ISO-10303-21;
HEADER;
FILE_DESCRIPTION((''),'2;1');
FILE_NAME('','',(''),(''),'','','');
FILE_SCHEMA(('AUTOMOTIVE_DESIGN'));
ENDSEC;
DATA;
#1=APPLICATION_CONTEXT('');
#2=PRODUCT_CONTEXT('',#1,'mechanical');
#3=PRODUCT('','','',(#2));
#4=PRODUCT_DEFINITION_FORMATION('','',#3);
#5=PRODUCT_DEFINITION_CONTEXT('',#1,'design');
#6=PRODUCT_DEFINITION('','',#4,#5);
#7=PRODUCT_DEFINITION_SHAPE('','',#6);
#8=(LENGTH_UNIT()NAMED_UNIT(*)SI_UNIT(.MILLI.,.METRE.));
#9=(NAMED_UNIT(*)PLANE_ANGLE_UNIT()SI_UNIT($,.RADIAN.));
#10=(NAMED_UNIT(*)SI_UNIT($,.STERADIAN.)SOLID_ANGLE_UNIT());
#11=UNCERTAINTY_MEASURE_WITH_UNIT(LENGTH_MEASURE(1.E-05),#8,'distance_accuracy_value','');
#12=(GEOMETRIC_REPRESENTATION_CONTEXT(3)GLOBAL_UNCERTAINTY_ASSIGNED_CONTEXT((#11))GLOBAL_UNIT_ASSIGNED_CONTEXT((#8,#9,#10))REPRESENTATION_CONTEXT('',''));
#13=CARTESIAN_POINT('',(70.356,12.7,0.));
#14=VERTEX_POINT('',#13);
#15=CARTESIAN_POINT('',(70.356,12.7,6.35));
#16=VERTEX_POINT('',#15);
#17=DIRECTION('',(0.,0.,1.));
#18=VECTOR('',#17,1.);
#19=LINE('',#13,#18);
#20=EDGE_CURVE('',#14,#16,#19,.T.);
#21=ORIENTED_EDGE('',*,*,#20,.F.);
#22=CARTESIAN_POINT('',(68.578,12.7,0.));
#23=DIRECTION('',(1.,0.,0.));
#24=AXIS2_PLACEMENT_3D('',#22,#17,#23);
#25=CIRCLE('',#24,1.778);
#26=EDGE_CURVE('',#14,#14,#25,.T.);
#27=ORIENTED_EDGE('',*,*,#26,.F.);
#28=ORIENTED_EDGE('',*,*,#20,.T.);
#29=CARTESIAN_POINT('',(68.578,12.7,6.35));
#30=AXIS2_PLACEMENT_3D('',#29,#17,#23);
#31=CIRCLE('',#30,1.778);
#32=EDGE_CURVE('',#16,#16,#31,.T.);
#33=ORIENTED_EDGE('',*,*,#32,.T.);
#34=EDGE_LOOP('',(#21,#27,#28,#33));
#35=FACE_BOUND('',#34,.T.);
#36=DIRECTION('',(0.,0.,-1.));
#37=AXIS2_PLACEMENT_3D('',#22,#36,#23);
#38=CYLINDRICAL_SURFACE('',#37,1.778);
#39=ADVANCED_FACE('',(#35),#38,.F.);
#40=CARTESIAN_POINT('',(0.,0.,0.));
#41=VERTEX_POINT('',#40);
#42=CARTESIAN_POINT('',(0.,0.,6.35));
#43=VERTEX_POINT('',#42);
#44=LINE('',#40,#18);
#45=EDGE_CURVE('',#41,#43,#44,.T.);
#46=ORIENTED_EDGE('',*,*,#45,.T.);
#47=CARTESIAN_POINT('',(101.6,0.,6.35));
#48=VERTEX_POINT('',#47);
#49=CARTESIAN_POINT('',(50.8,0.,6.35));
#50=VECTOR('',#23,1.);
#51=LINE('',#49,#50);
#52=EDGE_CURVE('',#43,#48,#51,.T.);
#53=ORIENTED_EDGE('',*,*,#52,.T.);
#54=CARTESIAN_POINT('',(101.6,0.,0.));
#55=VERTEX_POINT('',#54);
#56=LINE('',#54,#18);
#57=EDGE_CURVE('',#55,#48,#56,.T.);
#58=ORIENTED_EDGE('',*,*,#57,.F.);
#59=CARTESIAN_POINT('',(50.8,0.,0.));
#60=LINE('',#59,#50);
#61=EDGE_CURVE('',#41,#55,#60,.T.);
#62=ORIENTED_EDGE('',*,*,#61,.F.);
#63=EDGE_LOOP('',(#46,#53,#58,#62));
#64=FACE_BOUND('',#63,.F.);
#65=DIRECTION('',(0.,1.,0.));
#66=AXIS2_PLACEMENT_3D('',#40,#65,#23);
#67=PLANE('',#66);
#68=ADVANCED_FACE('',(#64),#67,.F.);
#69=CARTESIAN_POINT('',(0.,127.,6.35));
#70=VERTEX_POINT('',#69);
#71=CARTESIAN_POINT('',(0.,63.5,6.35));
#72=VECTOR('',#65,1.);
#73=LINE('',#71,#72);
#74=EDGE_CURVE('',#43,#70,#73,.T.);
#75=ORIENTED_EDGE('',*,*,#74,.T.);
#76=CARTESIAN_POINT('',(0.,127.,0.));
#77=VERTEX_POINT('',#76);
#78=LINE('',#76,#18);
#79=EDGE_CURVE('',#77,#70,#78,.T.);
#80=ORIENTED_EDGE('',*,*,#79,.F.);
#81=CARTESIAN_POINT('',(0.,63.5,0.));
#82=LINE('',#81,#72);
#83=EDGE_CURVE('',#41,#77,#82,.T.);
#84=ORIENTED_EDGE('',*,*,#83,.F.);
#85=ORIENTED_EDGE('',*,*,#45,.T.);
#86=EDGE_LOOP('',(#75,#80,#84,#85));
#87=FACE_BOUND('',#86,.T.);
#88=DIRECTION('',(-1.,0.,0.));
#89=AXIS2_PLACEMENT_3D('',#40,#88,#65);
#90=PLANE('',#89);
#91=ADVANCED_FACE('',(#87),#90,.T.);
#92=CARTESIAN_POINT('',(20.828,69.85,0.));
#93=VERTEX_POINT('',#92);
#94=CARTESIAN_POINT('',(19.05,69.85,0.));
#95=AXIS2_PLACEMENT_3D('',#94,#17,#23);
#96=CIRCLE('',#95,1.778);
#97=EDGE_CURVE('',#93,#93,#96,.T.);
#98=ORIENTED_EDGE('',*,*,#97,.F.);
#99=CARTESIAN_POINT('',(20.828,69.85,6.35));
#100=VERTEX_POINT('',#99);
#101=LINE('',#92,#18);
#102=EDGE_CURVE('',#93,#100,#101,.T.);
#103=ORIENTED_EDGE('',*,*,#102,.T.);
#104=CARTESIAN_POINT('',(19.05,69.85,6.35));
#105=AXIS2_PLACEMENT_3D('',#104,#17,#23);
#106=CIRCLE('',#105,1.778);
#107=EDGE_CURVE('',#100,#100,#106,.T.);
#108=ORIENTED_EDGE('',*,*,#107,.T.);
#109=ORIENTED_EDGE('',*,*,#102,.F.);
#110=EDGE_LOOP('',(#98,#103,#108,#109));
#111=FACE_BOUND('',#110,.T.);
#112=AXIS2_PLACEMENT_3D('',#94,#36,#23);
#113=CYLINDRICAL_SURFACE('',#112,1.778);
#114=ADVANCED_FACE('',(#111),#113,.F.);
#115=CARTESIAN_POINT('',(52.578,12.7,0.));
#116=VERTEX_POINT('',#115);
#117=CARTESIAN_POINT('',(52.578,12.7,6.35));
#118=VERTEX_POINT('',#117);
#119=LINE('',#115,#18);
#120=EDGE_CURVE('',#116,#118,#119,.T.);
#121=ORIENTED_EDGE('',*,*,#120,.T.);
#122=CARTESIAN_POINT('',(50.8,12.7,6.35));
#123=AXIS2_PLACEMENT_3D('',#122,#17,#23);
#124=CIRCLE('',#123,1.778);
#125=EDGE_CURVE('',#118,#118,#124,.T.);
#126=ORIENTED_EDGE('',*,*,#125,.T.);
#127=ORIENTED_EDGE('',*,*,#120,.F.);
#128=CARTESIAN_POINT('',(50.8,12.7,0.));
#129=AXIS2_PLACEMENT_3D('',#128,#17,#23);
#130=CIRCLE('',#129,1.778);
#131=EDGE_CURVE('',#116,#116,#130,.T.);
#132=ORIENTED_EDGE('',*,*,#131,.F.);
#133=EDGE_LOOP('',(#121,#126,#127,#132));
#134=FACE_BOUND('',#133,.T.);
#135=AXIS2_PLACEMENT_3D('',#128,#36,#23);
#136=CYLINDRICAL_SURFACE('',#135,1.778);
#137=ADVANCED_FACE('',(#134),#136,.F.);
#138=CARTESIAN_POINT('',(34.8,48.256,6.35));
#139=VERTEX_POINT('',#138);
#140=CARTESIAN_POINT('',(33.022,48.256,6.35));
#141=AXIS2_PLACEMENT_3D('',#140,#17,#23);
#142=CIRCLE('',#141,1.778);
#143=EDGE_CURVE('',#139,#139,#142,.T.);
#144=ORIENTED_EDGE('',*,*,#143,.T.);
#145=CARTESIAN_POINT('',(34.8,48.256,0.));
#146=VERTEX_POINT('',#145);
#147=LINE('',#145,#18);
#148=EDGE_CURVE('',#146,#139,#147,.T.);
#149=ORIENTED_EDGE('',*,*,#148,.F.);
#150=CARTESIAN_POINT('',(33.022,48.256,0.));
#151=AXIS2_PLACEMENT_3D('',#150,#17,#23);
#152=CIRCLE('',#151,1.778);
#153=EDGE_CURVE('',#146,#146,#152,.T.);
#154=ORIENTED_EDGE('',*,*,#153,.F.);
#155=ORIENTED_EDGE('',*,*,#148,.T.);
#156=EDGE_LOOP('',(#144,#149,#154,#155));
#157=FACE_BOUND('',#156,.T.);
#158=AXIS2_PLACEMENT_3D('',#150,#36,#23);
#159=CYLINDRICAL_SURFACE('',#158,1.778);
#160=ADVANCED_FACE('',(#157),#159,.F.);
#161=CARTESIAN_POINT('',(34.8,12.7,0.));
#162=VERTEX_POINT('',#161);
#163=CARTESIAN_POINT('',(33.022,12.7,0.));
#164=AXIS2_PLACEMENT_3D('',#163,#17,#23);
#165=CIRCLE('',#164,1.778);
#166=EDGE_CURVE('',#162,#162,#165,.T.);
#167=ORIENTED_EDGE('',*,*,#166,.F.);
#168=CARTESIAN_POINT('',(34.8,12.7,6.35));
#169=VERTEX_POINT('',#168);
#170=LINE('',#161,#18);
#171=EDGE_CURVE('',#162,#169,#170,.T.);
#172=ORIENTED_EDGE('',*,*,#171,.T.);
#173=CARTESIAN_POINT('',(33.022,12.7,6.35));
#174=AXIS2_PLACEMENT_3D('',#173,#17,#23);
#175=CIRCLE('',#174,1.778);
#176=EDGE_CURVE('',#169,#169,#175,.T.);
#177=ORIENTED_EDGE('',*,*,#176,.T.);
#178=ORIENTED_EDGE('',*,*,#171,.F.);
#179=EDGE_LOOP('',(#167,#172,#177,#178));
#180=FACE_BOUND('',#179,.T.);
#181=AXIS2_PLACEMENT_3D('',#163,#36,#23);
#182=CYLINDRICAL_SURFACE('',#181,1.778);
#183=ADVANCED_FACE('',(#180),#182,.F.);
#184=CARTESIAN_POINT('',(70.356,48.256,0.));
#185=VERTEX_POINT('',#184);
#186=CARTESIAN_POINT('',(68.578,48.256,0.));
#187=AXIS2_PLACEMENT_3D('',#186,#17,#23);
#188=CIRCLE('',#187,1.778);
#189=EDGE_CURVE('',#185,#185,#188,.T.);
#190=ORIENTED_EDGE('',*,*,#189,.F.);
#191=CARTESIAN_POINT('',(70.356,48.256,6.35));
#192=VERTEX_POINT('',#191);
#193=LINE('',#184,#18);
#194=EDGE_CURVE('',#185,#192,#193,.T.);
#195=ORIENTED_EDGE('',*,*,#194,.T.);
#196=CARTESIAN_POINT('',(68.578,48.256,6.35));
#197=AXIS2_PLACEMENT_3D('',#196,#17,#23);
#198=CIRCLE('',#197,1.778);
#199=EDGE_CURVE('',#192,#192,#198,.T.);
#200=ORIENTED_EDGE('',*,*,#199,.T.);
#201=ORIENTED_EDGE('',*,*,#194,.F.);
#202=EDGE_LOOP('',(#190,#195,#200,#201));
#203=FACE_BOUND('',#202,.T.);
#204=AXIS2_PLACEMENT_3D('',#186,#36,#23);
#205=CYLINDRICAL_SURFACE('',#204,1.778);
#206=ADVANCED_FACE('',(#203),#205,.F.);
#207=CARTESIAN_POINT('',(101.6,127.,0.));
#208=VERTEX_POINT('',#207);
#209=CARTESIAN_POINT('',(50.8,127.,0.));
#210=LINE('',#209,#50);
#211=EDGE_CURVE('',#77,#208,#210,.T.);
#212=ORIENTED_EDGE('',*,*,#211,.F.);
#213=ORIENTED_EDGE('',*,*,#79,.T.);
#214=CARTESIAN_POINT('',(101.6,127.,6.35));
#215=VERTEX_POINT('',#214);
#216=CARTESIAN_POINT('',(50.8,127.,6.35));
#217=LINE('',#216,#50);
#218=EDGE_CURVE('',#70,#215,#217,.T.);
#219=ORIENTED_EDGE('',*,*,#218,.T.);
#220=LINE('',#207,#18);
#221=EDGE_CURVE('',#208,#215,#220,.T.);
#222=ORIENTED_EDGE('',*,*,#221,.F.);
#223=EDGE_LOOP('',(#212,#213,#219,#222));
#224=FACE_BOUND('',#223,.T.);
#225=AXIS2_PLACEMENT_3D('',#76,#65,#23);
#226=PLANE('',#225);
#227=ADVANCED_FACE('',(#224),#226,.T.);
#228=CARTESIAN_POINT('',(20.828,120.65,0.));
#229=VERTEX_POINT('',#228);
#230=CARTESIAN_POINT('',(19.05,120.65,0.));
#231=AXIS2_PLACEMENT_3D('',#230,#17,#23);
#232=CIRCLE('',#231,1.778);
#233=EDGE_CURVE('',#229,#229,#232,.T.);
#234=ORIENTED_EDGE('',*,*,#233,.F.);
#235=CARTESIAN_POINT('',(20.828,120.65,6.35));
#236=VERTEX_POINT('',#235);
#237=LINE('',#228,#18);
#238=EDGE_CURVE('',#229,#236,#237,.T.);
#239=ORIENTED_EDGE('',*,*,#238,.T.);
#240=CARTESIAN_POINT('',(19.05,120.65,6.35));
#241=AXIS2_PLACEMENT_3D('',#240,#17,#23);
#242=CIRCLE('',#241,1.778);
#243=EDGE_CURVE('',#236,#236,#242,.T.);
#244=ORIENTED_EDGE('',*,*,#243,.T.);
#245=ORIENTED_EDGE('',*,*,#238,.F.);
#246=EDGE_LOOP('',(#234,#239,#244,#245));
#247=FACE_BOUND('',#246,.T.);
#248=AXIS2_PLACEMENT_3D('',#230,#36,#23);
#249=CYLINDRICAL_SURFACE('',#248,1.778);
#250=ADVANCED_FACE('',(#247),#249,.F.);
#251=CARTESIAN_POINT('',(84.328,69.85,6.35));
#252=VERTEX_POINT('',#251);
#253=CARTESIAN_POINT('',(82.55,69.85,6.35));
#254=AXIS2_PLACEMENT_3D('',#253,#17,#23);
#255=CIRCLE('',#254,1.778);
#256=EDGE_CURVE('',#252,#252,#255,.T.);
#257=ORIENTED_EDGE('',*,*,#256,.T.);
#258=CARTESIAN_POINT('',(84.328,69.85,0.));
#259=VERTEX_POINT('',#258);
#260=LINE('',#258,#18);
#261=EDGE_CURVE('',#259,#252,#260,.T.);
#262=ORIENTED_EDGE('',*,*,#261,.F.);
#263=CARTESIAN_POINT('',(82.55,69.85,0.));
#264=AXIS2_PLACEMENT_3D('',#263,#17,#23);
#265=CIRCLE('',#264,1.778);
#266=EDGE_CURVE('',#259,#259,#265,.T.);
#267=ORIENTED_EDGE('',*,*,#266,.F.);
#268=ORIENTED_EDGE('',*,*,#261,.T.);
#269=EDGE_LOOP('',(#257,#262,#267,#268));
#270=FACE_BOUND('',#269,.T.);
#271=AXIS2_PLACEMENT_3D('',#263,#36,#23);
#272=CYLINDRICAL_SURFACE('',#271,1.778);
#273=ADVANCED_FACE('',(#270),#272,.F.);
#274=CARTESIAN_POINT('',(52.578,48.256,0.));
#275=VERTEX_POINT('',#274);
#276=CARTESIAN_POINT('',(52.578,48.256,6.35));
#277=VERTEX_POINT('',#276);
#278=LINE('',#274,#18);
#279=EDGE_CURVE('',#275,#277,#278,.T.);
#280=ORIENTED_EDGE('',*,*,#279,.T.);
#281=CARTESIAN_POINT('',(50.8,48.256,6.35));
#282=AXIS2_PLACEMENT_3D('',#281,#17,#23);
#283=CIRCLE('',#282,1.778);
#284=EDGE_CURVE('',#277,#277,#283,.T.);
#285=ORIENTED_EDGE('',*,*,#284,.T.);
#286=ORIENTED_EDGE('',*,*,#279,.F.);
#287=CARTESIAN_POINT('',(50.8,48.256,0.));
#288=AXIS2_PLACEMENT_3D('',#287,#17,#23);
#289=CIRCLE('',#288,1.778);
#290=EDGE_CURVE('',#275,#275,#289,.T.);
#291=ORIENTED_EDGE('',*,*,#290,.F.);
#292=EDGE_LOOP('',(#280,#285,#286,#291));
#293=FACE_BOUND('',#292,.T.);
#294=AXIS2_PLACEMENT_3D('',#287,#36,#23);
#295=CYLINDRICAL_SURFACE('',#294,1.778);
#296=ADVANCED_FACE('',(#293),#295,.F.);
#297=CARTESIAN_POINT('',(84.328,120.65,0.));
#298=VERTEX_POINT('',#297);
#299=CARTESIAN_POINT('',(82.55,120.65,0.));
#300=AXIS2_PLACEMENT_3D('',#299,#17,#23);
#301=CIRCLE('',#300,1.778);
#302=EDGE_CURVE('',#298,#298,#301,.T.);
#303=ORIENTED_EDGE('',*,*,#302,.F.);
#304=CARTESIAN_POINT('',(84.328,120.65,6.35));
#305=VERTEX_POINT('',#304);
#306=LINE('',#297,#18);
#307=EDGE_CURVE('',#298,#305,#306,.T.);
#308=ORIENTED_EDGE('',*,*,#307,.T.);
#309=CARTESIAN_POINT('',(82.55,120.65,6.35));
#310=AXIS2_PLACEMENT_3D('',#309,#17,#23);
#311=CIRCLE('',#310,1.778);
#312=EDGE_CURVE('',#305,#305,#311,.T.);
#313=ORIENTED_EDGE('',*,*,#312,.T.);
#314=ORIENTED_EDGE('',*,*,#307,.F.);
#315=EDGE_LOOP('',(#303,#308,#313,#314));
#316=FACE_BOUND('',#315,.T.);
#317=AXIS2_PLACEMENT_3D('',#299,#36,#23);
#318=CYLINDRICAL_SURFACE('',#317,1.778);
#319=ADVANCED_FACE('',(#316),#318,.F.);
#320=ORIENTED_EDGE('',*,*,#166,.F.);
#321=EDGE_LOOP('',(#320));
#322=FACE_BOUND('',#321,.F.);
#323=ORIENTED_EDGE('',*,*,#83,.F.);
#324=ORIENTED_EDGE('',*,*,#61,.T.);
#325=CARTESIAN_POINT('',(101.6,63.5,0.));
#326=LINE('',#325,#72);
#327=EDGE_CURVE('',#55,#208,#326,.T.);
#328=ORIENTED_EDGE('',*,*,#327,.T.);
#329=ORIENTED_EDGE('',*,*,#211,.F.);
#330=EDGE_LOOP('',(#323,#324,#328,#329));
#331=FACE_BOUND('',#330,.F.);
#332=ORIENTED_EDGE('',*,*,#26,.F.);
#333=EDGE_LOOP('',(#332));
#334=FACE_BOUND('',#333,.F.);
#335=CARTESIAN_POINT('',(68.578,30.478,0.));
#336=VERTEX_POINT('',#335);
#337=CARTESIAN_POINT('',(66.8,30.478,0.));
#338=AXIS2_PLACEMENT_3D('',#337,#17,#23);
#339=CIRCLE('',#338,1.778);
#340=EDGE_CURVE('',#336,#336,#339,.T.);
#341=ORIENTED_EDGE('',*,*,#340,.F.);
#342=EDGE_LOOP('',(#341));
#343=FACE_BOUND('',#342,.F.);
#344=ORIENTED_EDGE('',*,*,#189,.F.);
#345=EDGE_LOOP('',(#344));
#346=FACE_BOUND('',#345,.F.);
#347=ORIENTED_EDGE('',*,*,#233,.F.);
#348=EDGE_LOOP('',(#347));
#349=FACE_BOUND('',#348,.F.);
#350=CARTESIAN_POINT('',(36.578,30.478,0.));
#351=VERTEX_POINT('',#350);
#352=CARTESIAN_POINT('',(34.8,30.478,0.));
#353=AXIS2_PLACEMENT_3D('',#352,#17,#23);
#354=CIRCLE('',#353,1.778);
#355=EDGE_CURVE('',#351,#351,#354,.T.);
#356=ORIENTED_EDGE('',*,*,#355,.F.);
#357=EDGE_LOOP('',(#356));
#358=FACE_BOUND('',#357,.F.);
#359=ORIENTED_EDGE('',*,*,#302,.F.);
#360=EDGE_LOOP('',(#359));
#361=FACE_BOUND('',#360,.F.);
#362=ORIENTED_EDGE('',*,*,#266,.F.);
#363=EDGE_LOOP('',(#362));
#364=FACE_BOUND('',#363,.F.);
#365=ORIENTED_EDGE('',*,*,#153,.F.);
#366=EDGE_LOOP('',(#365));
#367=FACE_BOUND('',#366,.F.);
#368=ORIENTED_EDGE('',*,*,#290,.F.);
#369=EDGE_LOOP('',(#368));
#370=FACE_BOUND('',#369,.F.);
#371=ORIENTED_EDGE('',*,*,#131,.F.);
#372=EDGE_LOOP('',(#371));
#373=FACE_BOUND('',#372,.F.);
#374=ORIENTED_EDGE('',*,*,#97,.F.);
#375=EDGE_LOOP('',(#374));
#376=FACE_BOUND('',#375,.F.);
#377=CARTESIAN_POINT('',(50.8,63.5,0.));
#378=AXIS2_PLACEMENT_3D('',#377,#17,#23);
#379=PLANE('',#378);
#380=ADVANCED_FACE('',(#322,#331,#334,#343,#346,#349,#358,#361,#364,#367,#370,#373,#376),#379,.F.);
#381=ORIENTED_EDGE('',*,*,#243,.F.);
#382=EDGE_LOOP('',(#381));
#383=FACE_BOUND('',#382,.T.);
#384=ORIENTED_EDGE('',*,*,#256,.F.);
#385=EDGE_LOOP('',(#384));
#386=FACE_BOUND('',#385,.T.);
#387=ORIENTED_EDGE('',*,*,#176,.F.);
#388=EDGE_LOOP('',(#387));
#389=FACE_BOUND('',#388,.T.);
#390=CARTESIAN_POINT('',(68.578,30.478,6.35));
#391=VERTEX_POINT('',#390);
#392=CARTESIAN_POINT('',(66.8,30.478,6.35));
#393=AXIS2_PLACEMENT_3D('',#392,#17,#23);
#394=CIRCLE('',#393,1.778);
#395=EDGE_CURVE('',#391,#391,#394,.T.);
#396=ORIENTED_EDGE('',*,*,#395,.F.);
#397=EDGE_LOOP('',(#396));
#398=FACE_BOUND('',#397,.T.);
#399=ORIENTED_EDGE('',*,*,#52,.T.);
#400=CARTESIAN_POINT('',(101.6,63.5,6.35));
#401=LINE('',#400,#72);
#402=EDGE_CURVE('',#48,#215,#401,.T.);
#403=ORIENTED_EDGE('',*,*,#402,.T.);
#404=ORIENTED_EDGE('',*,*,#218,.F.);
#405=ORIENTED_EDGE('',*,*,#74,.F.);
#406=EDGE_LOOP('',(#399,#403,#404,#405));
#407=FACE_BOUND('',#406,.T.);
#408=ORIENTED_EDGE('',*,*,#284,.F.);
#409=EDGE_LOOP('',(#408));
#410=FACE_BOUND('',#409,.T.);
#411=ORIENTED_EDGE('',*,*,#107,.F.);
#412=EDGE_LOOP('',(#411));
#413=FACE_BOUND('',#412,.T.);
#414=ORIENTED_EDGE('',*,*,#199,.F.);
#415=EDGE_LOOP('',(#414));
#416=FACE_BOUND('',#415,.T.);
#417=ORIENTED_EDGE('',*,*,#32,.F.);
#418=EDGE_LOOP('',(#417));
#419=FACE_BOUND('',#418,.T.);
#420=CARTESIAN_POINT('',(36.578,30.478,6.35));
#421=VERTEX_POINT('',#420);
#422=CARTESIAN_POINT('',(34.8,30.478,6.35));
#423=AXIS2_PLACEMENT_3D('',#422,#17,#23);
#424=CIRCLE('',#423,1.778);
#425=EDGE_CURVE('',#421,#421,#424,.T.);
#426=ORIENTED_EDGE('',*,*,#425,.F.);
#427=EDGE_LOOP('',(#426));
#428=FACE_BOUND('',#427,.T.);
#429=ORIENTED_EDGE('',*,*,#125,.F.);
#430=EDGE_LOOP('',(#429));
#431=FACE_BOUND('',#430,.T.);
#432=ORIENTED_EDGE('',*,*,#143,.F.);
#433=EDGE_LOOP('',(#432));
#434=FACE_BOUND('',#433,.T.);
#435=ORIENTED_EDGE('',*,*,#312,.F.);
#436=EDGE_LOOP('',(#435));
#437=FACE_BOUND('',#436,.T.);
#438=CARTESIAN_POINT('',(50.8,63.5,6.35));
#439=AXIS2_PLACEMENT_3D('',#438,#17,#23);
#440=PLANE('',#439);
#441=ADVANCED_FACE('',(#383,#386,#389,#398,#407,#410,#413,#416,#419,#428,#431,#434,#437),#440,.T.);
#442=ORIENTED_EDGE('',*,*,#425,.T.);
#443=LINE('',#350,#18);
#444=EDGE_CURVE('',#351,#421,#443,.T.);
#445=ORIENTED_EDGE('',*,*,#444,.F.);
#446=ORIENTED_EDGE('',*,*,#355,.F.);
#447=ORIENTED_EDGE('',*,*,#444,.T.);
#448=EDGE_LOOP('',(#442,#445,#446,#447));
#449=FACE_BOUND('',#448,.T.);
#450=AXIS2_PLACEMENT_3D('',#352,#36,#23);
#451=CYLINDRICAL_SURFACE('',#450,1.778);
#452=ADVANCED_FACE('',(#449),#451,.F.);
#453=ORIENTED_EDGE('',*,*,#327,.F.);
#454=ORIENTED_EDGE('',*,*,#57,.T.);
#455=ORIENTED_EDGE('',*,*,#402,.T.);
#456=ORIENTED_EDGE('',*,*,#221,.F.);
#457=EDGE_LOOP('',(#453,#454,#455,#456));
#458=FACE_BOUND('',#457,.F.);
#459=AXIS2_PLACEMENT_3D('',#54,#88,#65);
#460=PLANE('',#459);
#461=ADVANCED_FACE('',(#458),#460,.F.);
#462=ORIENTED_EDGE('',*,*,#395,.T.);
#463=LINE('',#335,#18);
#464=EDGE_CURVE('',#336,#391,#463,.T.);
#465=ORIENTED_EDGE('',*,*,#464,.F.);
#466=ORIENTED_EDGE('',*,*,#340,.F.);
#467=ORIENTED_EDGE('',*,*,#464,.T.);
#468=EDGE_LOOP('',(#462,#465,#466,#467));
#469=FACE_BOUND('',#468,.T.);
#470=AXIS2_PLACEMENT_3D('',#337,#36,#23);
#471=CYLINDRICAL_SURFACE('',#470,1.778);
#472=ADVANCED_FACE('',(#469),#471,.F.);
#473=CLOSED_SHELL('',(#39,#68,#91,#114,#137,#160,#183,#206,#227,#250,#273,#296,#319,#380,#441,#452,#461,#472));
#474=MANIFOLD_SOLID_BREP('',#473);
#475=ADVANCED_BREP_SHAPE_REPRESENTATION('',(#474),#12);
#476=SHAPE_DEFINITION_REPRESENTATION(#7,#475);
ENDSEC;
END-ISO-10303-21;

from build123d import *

# Parameters (mm, degrees)
F0_W     = 101.6
F0_H     = 127
F0_R     = 1.778
F1_DEPTH = 6.35


# Not quite as in the source:
# - a length typed as a fraction of an inch, garbled in the dataset ("3 / 203.2 mm" for 3/8 in), is restored


with BuildPart() as f1:
    # F0 (on Top) → F1 (new body)
    with BuildSketch(Plane.XY):
        with Locations((50.8, 63.5)):
            Rectangle(F0_W, F0_H)
        with Locations((33.022, 12.7)):
            Circle(F0_R, mode=Mode.SUBTRACT)
        with Locations((50.8, 12.7)):
            Circle(F0_R, mode=Mode.SUBTRACT)
        with Locations((34.8, 30.478)):
            Circle(F0_R, mode=Mode.SUBTRACT)
        with Locations((33.022, 48.256)):
            Circle(F0_R, mode=Mode.SUBTRACT)
        with Locations((50.8, 48.256)):
            Circle(F0_R, mode=Mode.SUBTRACT)
        with Locations((68.578, 12.7)):
            Circle(F0_R, mode=Mode.SUBTRACT)
        with Locations((66.8, 30.478)):
            Circle(F0_R, mode=Mode.SUBTRACT)
        with Locations((68.578, 48.256)):
            Circle(F0_R, mode=Mode.SUBTRACT)
        with Locations((19.05, 69.85)):
            Circle(F0_R, mode=Mode.SUBTRACT)
        with Locations((19.05, 120.65)):
            Circle(F0_R, mode=Mode.SUBTRACT)
        with Locations((82.55, 69.85)):
            Circle(F0_R, mode=Mode.SUBTRACT)
        with Locations((82.55, 120.65)):
            Circle(F0_R, mode=Mode.SUBTRACT)
    extrude(amount=F1_DEPTH)


solid = f1.part
